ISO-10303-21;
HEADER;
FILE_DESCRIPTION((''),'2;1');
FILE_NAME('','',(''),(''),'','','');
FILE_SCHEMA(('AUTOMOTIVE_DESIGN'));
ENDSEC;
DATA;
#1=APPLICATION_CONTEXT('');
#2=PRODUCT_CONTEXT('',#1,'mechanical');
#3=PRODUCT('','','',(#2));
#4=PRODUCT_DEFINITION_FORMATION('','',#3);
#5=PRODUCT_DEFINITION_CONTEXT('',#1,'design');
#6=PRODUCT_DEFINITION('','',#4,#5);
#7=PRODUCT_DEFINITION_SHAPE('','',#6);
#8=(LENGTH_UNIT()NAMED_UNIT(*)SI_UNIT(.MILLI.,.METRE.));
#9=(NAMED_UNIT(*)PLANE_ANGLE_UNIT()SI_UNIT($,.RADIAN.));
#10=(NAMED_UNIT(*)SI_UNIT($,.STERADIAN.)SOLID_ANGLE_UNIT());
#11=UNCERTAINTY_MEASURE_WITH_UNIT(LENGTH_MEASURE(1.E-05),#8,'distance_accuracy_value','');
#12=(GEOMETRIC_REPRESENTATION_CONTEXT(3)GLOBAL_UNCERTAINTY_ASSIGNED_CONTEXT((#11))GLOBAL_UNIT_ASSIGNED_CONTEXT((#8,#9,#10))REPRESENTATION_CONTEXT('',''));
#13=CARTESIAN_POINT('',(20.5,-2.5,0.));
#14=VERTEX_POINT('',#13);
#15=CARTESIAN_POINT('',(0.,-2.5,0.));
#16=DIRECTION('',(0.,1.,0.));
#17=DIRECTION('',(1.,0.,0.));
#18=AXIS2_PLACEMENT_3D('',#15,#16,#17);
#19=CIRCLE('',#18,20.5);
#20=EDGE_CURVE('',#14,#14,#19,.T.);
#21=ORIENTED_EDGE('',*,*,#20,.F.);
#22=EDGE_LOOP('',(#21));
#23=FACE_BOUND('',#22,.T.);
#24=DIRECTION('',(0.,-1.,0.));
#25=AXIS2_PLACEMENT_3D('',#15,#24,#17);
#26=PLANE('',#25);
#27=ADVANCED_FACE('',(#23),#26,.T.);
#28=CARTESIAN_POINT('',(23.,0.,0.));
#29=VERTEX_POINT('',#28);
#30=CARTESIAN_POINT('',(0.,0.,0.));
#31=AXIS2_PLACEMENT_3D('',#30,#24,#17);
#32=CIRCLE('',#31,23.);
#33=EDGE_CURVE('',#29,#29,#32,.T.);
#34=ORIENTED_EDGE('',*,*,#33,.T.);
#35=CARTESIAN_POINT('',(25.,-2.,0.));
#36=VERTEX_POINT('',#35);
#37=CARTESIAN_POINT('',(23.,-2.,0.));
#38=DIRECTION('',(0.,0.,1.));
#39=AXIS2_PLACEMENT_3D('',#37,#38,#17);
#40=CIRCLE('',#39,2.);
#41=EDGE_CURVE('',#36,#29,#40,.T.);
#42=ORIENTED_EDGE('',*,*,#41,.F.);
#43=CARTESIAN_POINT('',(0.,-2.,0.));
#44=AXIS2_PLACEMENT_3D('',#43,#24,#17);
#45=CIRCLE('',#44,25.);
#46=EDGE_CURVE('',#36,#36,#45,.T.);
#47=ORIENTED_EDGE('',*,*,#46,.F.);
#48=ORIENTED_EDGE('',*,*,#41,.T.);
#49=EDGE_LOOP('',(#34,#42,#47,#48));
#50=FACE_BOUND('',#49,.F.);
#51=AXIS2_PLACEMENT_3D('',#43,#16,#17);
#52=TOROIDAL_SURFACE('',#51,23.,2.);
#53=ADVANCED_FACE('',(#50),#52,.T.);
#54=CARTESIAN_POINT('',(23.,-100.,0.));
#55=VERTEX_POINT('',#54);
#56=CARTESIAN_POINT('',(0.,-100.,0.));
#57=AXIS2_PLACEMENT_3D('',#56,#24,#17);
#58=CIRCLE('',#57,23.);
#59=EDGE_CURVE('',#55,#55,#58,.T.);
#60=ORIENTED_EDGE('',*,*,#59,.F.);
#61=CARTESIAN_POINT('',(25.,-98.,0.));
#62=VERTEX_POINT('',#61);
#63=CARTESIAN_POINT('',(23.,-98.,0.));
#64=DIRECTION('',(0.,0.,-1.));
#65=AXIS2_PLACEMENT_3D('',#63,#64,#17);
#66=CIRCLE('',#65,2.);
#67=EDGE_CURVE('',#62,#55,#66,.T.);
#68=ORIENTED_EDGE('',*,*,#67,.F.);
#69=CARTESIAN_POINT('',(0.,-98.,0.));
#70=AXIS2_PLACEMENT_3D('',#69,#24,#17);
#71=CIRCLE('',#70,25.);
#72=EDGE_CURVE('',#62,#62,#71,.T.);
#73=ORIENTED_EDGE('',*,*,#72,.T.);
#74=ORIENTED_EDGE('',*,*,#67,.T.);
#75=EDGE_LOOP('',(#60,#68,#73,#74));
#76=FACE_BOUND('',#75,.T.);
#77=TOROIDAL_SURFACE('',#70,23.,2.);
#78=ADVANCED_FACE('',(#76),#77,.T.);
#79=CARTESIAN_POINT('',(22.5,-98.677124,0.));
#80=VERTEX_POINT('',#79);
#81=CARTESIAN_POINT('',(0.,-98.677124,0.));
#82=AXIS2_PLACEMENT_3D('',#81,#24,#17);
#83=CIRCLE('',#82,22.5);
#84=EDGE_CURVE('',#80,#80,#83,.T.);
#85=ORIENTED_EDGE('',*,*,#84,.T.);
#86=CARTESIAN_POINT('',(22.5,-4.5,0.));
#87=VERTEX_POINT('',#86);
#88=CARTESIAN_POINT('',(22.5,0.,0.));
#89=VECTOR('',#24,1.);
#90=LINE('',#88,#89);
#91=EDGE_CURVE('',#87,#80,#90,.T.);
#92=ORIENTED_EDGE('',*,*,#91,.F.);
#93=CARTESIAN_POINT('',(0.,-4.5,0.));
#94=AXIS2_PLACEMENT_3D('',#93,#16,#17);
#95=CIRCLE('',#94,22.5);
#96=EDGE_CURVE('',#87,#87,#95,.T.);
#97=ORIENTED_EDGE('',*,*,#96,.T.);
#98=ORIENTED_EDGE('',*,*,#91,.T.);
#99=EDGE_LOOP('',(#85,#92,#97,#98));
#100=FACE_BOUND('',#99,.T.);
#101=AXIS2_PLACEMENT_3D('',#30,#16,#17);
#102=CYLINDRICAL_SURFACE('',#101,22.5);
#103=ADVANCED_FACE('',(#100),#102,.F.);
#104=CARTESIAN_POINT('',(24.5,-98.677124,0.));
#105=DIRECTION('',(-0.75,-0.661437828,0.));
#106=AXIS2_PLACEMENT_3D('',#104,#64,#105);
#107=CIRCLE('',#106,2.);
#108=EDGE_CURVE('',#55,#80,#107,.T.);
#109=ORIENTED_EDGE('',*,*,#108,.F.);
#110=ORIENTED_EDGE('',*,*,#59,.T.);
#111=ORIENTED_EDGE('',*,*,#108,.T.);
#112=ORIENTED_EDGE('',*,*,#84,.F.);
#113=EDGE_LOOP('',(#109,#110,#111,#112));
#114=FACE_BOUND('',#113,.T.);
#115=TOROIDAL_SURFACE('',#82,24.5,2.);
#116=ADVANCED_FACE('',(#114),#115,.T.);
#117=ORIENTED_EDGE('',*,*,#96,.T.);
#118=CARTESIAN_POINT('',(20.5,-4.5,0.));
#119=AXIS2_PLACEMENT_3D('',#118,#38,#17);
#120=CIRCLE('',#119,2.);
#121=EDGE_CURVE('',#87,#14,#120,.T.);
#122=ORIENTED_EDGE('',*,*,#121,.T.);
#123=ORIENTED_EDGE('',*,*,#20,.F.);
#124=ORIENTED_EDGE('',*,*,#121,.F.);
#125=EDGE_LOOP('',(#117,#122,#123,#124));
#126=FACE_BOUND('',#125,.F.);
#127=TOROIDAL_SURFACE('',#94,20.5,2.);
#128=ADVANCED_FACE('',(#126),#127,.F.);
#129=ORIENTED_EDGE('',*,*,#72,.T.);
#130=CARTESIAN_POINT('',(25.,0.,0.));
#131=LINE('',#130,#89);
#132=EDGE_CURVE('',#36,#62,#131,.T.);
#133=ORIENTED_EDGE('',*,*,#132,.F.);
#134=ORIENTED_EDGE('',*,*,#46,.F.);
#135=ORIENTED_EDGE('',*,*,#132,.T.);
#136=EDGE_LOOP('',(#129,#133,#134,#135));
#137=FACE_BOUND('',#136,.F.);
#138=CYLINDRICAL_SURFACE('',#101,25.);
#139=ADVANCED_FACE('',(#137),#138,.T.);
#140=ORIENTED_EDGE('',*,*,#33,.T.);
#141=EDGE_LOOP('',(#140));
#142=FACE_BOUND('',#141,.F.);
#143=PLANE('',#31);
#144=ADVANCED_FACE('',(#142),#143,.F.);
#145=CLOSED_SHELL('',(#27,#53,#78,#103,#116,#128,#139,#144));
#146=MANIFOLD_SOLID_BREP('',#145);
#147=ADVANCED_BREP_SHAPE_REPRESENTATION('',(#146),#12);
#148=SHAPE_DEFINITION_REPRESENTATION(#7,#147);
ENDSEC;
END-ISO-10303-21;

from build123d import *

# Parameters (mm, degrees)
F0_R     = 25
F1_DEPTH = 100
F2_T     = -2.5
F3_R     = 2


# Not quite as in the source:
# - a fillet or chamfer that OpenCascade refuses, or shapes differently, is made with other operations: its cross-section is extruded or revolved along the edge and cut away or added


with BuildPart() as f1:
    # F0 (on Front) → F1 (new body)
    with BuildSketch(Plane.XZ):
        Circle(F0_R)
    extrude(amount=F1_DEPTH)

    # F2
    f2_openings = [f1.faces().sort_by_distance(p)[0] for p in [
        (0, -100, 0),
    ]]
    offset(amount=F2_T, openings=f2_openings)

    # F3
    f3_edges = [f1.edges().sort_by_distance(p)[0] for p in [
        (25, -50, 0),
        (-25, 0, 0),
        (-25, -100, 0),
    ]]
    fillet(f3_edges, radius=F3_R)

    # F4: fillet of radius 2 on 3 edges, made by hand

    # F4_s1 → F4_t2 (revolve)
    with BuildSketch(Plane.XY):
        with BuildLine():
            ThreePointArc((22.5, -4.5), (21.9142135624, -3.0857864376), (20.5, -2.5))
            Line((20.5, -2.5), (22.5, -2.5))
            Line((22.5, -2.5), (22.5, -4.5))
        make_face()
    revolve(axis=Axis((0, -2.5, 0), (0, 1, 0)))

    # F4_s3 → F4_t4 (revolve, cut)
    with BuildSketch(Plane.XY):
        with BuildLine():
            ThreePointArc((23, -100), (22.6291713066, -99.3842311257), (22.5, -98.6771243445))
            Line((22.5, -98.6771243445), (22.5, -100))
            Line((22.5, -100), (23, -100))
        make_face()
    revolve(axis=Axis((0, -100, 0), (0, -1, 0)), mode=Mode.SUBTRACT)


solid = f1.part
